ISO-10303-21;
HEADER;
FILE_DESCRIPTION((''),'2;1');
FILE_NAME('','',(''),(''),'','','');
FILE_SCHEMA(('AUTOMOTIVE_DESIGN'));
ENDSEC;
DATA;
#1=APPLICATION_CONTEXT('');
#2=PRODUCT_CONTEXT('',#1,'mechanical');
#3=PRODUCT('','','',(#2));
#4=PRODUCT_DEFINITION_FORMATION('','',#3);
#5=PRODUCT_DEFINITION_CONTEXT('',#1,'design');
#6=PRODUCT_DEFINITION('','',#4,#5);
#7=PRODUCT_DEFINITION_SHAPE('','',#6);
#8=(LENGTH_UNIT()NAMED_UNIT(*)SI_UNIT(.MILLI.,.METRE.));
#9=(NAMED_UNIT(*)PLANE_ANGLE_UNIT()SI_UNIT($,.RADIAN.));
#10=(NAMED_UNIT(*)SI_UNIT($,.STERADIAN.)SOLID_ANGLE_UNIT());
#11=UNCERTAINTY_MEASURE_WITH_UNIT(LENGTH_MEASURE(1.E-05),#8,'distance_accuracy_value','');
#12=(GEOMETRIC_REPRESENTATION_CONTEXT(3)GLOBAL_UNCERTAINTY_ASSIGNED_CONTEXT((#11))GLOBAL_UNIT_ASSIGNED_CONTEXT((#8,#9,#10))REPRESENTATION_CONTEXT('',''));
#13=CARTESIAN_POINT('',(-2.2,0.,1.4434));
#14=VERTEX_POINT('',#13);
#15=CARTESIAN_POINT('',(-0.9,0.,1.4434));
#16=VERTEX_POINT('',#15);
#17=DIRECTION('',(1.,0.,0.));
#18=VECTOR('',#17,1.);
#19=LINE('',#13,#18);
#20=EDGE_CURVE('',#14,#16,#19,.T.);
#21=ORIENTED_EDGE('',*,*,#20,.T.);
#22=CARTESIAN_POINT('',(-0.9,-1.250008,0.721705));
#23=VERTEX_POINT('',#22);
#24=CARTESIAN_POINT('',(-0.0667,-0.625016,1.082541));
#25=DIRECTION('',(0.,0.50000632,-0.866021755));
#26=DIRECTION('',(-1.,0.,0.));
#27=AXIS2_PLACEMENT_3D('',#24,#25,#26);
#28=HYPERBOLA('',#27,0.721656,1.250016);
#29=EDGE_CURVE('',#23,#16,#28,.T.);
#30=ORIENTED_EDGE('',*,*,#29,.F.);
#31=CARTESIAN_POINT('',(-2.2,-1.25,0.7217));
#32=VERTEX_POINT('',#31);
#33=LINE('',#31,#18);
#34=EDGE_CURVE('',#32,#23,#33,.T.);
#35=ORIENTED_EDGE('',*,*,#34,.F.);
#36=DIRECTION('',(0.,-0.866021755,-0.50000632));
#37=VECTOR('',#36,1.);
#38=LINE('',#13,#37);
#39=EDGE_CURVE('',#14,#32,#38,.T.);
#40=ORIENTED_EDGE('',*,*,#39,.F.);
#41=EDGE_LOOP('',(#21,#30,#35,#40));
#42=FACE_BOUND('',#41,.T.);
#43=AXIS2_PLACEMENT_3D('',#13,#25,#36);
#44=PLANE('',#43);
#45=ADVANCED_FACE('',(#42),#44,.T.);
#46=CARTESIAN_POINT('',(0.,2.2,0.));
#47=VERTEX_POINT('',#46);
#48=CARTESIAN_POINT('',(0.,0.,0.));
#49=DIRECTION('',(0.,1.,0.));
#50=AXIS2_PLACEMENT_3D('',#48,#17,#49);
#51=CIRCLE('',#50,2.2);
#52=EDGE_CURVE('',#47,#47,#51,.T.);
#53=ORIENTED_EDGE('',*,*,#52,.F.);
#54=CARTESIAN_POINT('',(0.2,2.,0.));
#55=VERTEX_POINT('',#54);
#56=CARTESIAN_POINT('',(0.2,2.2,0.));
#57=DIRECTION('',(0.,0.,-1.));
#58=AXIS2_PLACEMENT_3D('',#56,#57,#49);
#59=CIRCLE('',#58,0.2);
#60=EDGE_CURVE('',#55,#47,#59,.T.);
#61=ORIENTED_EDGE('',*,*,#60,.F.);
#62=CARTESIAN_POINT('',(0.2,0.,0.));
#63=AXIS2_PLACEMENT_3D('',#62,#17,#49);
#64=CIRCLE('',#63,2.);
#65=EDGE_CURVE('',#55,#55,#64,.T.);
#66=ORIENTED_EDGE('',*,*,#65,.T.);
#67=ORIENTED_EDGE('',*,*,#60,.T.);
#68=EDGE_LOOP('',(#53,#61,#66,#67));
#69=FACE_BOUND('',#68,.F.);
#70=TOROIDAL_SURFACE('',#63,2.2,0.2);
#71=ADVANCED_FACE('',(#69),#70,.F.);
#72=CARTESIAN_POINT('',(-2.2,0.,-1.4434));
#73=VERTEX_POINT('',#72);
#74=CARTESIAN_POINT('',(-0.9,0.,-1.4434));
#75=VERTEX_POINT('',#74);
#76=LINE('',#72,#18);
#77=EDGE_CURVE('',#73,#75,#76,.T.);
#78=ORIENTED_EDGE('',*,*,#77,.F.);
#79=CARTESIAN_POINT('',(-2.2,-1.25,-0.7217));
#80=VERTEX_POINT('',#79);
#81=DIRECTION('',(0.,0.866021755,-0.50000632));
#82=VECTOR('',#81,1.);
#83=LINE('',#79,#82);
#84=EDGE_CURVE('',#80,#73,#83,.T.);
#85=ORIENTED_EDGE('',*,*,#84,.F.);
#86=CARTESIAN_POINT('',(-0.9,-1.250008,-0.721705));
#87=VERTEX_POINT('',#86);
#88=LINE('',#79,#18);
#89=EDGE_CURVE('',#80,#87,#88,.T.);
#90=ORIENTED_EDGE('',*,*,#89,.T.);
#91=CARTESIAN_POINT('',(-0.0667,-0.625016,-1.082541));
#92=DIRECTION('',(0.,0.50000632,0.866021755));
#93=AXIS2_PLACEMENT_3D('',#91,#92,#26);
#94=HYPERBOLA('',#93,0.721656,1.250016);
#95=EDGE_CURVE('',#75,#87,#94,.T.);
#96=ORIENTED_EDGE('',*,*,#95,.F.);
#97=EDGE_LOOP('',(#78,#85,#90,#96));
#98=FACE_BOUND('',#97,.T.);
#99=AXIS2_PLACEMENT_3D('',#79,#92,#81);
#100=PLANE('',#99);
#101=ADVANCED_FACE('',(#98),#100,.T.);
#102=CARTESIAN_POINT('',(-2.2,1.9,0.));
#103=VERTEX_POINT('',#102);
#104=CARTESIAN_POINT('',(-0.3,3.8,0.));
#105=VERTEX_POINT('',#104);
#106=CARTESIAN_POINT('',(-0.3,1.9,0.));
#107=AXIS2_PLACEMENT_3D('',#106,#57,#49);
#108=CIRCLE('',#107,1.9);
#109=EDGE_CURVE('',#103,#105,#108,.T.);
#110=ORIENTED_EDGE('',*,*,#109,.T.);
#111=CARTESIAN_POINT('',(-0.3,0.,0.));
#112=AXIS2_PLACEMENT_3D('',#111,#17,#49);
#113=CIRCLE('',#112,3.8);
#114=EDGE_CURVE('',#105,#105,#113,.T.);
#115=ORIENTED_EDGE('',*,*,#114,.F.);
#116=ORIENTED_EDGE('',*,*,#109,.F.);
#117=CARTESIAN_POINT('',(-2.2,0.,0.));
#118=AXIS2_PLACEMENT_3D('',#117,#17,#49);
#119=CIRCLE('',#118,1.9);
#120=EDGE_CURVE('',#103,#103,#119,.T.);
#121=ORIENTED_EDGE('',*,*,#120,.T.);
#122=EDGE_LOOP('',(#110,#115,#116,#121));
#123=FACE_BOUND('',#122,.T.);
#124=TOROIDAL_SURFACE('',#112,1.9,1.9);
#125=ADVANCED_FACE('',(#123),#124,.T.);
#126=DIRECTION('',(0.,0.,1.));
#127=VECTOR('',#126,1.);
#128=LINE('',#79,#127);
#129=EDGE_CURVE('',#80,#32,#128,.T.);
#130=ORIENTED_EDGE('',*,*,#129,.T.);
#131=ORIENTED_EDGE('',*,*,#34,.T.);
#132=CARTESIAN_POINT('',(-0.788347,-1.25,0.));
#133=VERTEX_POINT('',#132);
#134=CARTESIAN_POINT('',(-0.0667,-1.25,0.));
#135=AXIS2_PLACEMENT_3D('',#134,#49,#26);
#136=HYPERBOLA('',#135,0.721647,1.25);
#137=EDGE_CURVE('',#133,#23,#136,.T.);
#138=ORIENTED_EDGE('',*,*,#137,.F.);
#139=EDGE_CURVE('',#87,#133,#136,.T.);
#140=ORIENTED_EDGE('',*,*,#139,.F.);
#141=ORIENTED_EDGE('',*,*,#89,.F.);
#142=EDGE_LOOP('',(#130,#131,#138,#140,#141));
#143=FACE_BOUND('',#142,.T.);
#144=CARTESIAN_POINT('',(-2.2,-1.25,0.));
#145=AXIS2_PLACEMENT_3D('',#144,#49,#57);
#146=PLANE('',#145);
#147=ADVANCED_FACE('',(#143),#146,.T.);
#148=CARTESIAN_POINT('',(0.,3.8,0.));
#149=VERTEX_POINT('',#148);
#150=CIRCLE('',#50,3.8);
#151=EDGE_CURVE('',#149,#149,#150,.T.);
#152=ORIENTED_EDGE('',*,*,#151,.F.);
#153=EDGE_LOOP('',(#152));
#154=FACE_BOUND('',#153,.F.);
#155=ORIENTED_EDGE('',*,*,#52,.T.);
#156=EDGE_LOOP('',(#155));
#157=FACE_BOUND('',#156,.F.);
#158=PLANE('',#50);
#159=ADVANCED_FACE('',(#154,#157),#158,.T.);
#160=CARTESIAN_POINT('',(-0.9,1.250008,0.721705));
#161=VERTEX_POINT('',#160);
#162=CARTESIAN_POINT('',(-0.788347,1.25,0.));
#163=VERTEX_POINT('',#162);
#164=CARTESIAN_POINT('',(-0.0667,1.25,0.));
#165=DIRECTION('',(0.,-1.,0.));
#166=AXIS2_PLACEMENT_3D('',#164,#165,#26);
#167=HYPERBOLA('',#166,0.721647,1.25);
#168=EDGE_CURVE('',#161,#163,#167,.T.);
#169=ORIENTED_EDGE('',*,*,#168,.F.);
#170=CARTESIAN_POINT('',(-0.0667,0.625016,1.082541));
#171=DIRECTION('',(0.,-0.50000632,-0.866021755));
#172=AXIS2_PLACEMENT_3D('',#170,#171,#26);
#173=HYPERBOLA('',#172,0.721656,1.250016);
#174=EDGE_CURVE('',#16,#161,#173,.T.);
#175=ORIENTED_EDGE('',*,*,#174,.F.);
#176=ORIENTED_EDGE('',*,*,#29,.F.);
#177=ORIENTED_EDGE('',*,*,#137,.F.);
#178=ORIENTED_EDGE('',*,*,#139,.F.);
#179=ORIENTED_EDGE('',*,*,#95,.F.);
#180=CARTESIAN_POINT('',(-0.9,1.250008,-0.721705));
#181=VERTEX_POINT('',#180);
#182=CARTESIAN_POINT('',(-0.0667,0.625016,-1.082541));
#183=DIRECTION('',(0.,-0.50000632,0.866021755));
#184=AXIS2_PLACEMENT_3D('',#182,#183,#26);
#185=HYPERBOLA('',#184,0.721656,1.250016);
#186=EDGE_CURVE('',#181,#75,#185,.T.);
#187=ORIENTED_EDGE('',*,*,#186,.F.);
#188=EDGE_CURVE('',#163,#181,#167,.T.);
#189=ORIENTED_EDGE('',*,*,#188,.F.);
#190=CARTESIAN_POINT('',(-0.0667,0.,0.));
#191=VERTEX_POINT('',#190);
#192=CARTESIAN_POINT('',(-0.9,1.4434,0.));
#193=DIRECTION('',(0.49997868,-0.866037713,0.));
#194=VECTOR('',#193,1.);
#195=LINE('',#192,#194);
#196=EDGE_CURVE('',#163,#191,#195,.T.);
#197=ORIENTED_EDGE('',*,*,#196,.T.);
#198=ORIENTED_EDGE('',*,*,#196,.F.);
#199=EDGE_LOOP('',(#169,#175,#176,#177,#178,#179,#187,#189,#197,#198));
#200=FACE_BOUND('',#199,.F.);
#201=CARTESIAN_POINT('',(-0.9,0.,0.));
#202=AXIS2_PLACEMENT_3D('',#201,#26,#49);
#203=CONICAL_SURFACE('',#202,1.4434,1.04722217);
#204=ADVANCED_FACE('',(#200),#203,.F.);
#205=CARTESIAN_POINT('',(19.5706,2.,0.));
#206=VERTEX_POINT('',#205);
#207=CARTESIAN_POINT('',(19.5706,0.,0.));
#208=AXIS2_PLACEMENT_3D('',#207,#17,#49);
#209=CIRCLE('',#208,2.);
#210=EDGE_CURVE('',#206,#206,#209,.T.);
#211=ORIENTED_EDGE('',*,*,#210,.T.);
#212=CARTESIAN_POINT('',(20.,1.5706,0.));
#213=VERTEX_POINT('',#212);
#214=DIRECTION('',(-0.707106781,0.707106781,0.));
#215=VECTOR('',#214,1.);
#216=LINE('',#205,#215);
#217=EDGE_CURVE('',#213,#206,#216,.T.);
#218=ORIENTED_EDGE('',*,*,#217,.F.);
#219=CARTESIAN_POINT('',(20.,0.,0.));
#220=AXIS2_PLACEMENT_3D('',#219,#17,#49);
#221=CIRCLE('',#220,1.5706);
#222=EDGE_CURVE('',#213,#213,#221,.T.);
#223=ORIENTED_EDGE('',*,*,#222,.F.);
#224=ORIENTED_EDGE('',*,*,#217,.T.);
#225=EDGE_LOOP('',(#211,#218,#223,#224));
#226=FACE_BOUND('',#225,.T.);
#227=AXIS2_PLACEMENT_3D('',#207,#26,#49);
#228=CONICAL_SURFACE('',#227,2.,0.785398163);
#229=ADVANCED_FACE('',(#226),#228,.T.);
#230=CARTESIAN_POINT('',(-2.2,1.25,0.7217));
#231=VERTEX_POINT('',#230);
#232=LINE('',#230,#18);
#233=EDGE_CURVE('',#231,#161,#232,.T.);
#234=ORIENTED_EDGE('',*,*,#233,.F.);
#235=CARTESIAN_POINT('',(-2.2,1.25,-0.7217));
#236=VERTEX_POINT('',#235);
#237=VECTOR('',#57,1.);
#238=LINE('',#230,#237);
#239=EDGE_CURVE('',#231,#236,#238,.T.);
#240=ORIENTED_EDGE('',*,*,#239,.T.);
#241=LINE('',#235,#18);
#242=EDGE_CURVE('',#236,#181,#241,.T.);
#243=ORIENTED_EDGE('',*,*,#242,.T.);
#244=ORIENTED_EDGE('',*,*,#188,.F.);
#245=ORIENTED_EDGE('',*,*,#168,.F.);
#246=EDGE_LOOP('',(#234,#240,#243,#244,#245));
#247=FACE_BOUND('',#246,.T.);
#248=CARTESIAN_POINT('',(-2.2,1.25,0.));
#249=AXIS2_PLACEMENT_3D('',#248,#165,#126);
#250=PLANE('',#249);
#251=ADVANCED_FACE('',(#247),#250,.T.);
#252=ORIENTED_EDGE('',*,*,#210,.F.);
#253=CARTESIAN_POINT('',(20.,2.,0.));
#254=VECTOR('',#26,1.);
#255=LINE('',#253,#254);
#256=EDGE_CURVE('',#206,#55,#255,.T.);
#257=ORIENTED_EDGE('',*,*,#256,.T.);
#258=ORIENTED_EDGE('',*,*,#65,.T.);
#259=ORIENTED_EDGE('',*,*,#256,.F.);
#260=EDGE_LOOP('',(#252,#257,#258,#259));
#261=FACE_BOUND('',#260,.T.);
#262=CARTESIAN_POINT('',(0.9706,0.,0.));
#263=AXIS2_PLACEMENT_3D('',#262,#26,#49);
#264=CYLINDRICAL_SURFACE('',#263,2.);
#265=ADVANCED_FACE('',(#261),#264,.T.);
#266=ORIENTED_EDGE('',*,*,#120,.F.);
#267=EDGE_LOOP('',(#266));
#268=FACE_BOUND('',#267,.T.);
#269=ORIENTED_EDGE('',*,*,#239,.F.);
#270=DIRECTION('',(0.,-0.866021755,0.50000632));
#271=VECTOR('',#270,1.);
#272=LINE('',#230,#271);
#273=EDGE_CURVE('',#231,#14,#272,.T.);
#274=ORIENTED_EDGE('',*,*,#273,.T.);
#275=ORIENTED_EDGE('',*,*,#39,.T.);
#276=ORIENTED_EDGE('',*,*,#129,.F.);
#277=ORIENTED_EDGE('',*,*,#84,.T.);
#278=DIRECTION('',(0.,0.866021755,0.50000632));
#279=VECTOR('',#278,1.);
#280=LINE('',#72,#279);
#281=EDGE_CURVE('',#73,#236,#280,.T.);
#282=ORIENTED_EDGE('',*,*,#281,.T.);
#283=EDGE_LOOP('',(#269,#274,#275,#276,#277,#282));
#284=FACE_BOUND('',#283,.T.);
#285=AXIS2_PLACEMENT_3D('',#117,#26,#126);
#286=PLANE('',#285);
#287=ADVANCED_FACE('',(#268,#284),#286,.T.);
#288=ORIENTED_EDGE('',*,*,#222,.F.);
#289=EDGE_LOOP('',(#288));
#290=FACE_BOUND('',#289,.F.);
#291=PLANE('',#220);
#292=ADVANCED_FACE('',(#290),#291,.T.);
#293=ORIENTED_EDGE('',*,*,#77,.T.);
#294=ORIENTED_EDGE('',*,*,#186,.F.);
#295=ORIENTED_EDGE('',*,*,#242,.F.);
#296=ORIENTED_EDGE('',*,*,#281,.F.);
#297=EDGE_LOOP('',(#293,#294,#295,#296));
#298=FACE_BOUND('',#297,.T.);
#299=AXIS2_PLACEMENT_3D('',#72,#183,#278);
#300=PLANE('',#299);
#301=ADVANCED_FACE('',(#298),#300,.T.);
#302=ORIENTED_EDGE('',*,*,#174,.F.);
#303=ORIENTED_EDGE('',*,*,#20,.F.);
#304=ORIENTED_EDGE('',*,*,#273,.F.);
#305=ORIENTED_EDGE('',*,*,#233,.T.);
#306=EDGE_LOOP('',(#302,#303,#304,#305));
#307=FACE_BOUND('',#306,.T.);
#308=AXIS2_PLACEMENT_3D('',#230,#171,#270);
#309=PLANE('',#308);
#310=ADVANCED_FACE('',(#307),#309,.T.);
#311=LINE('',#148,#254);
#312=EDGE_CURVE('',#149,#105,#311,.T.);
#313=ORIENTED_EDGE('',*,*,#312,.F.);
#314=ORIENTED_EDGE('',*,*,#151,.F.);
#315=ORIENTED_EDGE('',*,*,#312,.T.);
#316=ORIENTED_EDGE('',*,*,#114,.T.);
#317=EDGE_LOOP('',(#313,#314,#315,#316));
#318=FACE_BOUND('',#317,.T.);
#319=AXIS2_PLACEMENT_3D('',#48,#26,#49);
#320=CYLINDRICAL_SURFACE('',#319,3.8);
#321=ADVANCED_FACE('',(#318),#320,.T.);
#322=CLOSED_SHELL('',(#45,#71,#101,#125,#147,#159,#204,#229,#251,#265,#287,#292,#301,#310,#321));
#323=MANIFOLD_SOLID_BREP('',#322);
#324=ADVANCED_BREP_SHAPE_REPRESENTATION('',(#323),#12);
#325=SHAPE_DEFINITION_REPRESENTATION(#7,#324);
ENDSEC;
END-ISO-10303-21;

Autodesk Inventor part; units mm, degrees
ref_plane "YZ Plane" through (0, 0, 0) normal (1, 0, 0) x (0, 1, 0)
ref_plane "XZ Plane" through (0, 0, 0) normal (0, 1, 0) x (-1, 0, 0)
sketch "Эскиз1" plane through (0, 0, 0) normal (0, 0, 1) x (1, 0, 0)
  line L0 (-0.0667, 0) -> (20, 0)
  line L1 (20, 0) -> (20, 2)
  line L2 (20, 2) -> (1.4, 2)
  line L3 (1.4, 2) -> (0.9706, 2)
  line L4 (0.9706, 2) -> (0, 2)
  line L5 (0, 2) -> (0, 3.8)
  line L6 (0, 3.8) -> (-2.2, 3.8)
  line L7 (-2.2, 3.8) -> (-2.2, 1.4434)
  line L8 (-2.2, 1.4434) -> (-0.9, 1.4434)
  line L9 (-0.9, 1.4434) -> (-0.0667, 0)
  line L10 (-6.64, 0) -> (24.44, 0) projected
  line L11 (0, -0.76) -> (0, 4.56) projected
  line L12 (1.4, 2) -> (0, 2) construction
  dimension "d0" = 18.6
  dimension "d1" = 0.4294
  dimension "d2" = 2.2
  dimension "d3" = 1.3
  dimension "d4" = 60
  dimension "d5" = 4
  dimension "d6" = 4
  dimension "d7" = 2.8868
  dimension "d8" = 7.6
  dimension "d19" = 20
revolve "Базовый элемент" add sketch "Эскиз1" angle 360 about axis through (-0.0667, 0, 0) along (1, 0, 0)
sketch "Эскиз2" plane through (-2.2, 0, 0) normal (-1, 0, 0) x (0, 0, 1)
  circle A0 centre (0, 0) radius 1.4434 projected
  line L0 (0, -5.32) -> (0, 5.32) projected
  line L1 (-5.32, 0) -> (5.32, 0) projected
  line L2 (1.4434, 0) -> (0.7217, -1.25)
  line L3 (0.7217, -1.25) -> (-0.7217, -1.25)
  line L4 (-0.7217, -1.25) -> (-1.4434, 0)
  line L5 (-1.4434, 0) -> (-0.7217, 1.25)
  line L6 (-0.7217, 1.25) -> (0.7217, 1.25)
  line L7 (0.7217, 1.25) -> (1.4434, 0)
  point P0 (0, 0)
extrude "Паз" add sketch "Эскиз2" against normal up to next contours L7 A0 | A0 L2 | L6 L0 A0 | A0 L0 L3 | L0 L6 A0 | A0 L3 L0 | L4 A0 | A0 L5
fillet "Сопряжение1" radius 1.9 1 edges at (-2.2, -3.8, 0)
thread "Резьба" size "M4x0.7" class "4g6g" standard "ANSI Metric M Profile" length 18.6
chamfer "Фаска1" distance 0.4294 distance2 0.4294 1 edges at (20, -2, 0) measured on face at (20, 0.527, -0.2661)
fillet "Сопряжение2" radius 0.2 1 edges at (0, -2, 0)
ref_plane "Work Plane1" through (30, 0, 0) normal (0, -0.5, 0.8660254) x (1, 0, 0)
equation "\"d0\" = GEL"
equation "\"d1\" = GAL"
equation "\"d2\" = KOH"
equation "\"d3\" = INTI"
equation "\"d5\" = GD"
equation "\"d6\" = BDM"
equation "\"d7\" = 1.1547 * SW"
equation "\"d8\" = KOD"
equation "\"d19\" = NLG"
equation "\"d16\" = RR"
equation "\"d12\" = GEL"
equation "\"d14\" = -0.5 * SPD + 0.5 * GD"
equation "\"d15\" = GUL"
equation "\"d29\" = R"
equation "\"GD\" = NND"
equation "\"NLG\" = 20"
equation "\"GEL\" = 18.6"
equation "\"KOD\" = 7.6"
equation "\"KOH\" = 2.2"
equation "\"INTI\" = 1.3"
equation "\"GAL\" = 0.61345 * PTC"
equation "\"GUL\" = 0.61345 * PTC"
equation "\"BDM\" = NND"
equation "\"SW\" = 2.5"
equation "\"RR\" = 1.9"
equation "\"SPD\" = 3.14117"
equation "\"d28\" = R"
equation "\"R\" = 0.2"
equation "\"TOA\" = 30deg"
equation "\"THREADDIA\" = 4"
equation "\"KOD1\" = KOD - 2 * RR"
equation "\"PTC\" = 0.7"
equation "\"NND\" = 4"
equation "\"E0\" = 1.155 * SW"
equation "\"GD1\" = THREADDIA - 1.2269 * PTC"
properties part number "ANSI B18.3.4M - M4 x 0.7 x 20, BHSBHCSM" material "Сталь, мягкая"
